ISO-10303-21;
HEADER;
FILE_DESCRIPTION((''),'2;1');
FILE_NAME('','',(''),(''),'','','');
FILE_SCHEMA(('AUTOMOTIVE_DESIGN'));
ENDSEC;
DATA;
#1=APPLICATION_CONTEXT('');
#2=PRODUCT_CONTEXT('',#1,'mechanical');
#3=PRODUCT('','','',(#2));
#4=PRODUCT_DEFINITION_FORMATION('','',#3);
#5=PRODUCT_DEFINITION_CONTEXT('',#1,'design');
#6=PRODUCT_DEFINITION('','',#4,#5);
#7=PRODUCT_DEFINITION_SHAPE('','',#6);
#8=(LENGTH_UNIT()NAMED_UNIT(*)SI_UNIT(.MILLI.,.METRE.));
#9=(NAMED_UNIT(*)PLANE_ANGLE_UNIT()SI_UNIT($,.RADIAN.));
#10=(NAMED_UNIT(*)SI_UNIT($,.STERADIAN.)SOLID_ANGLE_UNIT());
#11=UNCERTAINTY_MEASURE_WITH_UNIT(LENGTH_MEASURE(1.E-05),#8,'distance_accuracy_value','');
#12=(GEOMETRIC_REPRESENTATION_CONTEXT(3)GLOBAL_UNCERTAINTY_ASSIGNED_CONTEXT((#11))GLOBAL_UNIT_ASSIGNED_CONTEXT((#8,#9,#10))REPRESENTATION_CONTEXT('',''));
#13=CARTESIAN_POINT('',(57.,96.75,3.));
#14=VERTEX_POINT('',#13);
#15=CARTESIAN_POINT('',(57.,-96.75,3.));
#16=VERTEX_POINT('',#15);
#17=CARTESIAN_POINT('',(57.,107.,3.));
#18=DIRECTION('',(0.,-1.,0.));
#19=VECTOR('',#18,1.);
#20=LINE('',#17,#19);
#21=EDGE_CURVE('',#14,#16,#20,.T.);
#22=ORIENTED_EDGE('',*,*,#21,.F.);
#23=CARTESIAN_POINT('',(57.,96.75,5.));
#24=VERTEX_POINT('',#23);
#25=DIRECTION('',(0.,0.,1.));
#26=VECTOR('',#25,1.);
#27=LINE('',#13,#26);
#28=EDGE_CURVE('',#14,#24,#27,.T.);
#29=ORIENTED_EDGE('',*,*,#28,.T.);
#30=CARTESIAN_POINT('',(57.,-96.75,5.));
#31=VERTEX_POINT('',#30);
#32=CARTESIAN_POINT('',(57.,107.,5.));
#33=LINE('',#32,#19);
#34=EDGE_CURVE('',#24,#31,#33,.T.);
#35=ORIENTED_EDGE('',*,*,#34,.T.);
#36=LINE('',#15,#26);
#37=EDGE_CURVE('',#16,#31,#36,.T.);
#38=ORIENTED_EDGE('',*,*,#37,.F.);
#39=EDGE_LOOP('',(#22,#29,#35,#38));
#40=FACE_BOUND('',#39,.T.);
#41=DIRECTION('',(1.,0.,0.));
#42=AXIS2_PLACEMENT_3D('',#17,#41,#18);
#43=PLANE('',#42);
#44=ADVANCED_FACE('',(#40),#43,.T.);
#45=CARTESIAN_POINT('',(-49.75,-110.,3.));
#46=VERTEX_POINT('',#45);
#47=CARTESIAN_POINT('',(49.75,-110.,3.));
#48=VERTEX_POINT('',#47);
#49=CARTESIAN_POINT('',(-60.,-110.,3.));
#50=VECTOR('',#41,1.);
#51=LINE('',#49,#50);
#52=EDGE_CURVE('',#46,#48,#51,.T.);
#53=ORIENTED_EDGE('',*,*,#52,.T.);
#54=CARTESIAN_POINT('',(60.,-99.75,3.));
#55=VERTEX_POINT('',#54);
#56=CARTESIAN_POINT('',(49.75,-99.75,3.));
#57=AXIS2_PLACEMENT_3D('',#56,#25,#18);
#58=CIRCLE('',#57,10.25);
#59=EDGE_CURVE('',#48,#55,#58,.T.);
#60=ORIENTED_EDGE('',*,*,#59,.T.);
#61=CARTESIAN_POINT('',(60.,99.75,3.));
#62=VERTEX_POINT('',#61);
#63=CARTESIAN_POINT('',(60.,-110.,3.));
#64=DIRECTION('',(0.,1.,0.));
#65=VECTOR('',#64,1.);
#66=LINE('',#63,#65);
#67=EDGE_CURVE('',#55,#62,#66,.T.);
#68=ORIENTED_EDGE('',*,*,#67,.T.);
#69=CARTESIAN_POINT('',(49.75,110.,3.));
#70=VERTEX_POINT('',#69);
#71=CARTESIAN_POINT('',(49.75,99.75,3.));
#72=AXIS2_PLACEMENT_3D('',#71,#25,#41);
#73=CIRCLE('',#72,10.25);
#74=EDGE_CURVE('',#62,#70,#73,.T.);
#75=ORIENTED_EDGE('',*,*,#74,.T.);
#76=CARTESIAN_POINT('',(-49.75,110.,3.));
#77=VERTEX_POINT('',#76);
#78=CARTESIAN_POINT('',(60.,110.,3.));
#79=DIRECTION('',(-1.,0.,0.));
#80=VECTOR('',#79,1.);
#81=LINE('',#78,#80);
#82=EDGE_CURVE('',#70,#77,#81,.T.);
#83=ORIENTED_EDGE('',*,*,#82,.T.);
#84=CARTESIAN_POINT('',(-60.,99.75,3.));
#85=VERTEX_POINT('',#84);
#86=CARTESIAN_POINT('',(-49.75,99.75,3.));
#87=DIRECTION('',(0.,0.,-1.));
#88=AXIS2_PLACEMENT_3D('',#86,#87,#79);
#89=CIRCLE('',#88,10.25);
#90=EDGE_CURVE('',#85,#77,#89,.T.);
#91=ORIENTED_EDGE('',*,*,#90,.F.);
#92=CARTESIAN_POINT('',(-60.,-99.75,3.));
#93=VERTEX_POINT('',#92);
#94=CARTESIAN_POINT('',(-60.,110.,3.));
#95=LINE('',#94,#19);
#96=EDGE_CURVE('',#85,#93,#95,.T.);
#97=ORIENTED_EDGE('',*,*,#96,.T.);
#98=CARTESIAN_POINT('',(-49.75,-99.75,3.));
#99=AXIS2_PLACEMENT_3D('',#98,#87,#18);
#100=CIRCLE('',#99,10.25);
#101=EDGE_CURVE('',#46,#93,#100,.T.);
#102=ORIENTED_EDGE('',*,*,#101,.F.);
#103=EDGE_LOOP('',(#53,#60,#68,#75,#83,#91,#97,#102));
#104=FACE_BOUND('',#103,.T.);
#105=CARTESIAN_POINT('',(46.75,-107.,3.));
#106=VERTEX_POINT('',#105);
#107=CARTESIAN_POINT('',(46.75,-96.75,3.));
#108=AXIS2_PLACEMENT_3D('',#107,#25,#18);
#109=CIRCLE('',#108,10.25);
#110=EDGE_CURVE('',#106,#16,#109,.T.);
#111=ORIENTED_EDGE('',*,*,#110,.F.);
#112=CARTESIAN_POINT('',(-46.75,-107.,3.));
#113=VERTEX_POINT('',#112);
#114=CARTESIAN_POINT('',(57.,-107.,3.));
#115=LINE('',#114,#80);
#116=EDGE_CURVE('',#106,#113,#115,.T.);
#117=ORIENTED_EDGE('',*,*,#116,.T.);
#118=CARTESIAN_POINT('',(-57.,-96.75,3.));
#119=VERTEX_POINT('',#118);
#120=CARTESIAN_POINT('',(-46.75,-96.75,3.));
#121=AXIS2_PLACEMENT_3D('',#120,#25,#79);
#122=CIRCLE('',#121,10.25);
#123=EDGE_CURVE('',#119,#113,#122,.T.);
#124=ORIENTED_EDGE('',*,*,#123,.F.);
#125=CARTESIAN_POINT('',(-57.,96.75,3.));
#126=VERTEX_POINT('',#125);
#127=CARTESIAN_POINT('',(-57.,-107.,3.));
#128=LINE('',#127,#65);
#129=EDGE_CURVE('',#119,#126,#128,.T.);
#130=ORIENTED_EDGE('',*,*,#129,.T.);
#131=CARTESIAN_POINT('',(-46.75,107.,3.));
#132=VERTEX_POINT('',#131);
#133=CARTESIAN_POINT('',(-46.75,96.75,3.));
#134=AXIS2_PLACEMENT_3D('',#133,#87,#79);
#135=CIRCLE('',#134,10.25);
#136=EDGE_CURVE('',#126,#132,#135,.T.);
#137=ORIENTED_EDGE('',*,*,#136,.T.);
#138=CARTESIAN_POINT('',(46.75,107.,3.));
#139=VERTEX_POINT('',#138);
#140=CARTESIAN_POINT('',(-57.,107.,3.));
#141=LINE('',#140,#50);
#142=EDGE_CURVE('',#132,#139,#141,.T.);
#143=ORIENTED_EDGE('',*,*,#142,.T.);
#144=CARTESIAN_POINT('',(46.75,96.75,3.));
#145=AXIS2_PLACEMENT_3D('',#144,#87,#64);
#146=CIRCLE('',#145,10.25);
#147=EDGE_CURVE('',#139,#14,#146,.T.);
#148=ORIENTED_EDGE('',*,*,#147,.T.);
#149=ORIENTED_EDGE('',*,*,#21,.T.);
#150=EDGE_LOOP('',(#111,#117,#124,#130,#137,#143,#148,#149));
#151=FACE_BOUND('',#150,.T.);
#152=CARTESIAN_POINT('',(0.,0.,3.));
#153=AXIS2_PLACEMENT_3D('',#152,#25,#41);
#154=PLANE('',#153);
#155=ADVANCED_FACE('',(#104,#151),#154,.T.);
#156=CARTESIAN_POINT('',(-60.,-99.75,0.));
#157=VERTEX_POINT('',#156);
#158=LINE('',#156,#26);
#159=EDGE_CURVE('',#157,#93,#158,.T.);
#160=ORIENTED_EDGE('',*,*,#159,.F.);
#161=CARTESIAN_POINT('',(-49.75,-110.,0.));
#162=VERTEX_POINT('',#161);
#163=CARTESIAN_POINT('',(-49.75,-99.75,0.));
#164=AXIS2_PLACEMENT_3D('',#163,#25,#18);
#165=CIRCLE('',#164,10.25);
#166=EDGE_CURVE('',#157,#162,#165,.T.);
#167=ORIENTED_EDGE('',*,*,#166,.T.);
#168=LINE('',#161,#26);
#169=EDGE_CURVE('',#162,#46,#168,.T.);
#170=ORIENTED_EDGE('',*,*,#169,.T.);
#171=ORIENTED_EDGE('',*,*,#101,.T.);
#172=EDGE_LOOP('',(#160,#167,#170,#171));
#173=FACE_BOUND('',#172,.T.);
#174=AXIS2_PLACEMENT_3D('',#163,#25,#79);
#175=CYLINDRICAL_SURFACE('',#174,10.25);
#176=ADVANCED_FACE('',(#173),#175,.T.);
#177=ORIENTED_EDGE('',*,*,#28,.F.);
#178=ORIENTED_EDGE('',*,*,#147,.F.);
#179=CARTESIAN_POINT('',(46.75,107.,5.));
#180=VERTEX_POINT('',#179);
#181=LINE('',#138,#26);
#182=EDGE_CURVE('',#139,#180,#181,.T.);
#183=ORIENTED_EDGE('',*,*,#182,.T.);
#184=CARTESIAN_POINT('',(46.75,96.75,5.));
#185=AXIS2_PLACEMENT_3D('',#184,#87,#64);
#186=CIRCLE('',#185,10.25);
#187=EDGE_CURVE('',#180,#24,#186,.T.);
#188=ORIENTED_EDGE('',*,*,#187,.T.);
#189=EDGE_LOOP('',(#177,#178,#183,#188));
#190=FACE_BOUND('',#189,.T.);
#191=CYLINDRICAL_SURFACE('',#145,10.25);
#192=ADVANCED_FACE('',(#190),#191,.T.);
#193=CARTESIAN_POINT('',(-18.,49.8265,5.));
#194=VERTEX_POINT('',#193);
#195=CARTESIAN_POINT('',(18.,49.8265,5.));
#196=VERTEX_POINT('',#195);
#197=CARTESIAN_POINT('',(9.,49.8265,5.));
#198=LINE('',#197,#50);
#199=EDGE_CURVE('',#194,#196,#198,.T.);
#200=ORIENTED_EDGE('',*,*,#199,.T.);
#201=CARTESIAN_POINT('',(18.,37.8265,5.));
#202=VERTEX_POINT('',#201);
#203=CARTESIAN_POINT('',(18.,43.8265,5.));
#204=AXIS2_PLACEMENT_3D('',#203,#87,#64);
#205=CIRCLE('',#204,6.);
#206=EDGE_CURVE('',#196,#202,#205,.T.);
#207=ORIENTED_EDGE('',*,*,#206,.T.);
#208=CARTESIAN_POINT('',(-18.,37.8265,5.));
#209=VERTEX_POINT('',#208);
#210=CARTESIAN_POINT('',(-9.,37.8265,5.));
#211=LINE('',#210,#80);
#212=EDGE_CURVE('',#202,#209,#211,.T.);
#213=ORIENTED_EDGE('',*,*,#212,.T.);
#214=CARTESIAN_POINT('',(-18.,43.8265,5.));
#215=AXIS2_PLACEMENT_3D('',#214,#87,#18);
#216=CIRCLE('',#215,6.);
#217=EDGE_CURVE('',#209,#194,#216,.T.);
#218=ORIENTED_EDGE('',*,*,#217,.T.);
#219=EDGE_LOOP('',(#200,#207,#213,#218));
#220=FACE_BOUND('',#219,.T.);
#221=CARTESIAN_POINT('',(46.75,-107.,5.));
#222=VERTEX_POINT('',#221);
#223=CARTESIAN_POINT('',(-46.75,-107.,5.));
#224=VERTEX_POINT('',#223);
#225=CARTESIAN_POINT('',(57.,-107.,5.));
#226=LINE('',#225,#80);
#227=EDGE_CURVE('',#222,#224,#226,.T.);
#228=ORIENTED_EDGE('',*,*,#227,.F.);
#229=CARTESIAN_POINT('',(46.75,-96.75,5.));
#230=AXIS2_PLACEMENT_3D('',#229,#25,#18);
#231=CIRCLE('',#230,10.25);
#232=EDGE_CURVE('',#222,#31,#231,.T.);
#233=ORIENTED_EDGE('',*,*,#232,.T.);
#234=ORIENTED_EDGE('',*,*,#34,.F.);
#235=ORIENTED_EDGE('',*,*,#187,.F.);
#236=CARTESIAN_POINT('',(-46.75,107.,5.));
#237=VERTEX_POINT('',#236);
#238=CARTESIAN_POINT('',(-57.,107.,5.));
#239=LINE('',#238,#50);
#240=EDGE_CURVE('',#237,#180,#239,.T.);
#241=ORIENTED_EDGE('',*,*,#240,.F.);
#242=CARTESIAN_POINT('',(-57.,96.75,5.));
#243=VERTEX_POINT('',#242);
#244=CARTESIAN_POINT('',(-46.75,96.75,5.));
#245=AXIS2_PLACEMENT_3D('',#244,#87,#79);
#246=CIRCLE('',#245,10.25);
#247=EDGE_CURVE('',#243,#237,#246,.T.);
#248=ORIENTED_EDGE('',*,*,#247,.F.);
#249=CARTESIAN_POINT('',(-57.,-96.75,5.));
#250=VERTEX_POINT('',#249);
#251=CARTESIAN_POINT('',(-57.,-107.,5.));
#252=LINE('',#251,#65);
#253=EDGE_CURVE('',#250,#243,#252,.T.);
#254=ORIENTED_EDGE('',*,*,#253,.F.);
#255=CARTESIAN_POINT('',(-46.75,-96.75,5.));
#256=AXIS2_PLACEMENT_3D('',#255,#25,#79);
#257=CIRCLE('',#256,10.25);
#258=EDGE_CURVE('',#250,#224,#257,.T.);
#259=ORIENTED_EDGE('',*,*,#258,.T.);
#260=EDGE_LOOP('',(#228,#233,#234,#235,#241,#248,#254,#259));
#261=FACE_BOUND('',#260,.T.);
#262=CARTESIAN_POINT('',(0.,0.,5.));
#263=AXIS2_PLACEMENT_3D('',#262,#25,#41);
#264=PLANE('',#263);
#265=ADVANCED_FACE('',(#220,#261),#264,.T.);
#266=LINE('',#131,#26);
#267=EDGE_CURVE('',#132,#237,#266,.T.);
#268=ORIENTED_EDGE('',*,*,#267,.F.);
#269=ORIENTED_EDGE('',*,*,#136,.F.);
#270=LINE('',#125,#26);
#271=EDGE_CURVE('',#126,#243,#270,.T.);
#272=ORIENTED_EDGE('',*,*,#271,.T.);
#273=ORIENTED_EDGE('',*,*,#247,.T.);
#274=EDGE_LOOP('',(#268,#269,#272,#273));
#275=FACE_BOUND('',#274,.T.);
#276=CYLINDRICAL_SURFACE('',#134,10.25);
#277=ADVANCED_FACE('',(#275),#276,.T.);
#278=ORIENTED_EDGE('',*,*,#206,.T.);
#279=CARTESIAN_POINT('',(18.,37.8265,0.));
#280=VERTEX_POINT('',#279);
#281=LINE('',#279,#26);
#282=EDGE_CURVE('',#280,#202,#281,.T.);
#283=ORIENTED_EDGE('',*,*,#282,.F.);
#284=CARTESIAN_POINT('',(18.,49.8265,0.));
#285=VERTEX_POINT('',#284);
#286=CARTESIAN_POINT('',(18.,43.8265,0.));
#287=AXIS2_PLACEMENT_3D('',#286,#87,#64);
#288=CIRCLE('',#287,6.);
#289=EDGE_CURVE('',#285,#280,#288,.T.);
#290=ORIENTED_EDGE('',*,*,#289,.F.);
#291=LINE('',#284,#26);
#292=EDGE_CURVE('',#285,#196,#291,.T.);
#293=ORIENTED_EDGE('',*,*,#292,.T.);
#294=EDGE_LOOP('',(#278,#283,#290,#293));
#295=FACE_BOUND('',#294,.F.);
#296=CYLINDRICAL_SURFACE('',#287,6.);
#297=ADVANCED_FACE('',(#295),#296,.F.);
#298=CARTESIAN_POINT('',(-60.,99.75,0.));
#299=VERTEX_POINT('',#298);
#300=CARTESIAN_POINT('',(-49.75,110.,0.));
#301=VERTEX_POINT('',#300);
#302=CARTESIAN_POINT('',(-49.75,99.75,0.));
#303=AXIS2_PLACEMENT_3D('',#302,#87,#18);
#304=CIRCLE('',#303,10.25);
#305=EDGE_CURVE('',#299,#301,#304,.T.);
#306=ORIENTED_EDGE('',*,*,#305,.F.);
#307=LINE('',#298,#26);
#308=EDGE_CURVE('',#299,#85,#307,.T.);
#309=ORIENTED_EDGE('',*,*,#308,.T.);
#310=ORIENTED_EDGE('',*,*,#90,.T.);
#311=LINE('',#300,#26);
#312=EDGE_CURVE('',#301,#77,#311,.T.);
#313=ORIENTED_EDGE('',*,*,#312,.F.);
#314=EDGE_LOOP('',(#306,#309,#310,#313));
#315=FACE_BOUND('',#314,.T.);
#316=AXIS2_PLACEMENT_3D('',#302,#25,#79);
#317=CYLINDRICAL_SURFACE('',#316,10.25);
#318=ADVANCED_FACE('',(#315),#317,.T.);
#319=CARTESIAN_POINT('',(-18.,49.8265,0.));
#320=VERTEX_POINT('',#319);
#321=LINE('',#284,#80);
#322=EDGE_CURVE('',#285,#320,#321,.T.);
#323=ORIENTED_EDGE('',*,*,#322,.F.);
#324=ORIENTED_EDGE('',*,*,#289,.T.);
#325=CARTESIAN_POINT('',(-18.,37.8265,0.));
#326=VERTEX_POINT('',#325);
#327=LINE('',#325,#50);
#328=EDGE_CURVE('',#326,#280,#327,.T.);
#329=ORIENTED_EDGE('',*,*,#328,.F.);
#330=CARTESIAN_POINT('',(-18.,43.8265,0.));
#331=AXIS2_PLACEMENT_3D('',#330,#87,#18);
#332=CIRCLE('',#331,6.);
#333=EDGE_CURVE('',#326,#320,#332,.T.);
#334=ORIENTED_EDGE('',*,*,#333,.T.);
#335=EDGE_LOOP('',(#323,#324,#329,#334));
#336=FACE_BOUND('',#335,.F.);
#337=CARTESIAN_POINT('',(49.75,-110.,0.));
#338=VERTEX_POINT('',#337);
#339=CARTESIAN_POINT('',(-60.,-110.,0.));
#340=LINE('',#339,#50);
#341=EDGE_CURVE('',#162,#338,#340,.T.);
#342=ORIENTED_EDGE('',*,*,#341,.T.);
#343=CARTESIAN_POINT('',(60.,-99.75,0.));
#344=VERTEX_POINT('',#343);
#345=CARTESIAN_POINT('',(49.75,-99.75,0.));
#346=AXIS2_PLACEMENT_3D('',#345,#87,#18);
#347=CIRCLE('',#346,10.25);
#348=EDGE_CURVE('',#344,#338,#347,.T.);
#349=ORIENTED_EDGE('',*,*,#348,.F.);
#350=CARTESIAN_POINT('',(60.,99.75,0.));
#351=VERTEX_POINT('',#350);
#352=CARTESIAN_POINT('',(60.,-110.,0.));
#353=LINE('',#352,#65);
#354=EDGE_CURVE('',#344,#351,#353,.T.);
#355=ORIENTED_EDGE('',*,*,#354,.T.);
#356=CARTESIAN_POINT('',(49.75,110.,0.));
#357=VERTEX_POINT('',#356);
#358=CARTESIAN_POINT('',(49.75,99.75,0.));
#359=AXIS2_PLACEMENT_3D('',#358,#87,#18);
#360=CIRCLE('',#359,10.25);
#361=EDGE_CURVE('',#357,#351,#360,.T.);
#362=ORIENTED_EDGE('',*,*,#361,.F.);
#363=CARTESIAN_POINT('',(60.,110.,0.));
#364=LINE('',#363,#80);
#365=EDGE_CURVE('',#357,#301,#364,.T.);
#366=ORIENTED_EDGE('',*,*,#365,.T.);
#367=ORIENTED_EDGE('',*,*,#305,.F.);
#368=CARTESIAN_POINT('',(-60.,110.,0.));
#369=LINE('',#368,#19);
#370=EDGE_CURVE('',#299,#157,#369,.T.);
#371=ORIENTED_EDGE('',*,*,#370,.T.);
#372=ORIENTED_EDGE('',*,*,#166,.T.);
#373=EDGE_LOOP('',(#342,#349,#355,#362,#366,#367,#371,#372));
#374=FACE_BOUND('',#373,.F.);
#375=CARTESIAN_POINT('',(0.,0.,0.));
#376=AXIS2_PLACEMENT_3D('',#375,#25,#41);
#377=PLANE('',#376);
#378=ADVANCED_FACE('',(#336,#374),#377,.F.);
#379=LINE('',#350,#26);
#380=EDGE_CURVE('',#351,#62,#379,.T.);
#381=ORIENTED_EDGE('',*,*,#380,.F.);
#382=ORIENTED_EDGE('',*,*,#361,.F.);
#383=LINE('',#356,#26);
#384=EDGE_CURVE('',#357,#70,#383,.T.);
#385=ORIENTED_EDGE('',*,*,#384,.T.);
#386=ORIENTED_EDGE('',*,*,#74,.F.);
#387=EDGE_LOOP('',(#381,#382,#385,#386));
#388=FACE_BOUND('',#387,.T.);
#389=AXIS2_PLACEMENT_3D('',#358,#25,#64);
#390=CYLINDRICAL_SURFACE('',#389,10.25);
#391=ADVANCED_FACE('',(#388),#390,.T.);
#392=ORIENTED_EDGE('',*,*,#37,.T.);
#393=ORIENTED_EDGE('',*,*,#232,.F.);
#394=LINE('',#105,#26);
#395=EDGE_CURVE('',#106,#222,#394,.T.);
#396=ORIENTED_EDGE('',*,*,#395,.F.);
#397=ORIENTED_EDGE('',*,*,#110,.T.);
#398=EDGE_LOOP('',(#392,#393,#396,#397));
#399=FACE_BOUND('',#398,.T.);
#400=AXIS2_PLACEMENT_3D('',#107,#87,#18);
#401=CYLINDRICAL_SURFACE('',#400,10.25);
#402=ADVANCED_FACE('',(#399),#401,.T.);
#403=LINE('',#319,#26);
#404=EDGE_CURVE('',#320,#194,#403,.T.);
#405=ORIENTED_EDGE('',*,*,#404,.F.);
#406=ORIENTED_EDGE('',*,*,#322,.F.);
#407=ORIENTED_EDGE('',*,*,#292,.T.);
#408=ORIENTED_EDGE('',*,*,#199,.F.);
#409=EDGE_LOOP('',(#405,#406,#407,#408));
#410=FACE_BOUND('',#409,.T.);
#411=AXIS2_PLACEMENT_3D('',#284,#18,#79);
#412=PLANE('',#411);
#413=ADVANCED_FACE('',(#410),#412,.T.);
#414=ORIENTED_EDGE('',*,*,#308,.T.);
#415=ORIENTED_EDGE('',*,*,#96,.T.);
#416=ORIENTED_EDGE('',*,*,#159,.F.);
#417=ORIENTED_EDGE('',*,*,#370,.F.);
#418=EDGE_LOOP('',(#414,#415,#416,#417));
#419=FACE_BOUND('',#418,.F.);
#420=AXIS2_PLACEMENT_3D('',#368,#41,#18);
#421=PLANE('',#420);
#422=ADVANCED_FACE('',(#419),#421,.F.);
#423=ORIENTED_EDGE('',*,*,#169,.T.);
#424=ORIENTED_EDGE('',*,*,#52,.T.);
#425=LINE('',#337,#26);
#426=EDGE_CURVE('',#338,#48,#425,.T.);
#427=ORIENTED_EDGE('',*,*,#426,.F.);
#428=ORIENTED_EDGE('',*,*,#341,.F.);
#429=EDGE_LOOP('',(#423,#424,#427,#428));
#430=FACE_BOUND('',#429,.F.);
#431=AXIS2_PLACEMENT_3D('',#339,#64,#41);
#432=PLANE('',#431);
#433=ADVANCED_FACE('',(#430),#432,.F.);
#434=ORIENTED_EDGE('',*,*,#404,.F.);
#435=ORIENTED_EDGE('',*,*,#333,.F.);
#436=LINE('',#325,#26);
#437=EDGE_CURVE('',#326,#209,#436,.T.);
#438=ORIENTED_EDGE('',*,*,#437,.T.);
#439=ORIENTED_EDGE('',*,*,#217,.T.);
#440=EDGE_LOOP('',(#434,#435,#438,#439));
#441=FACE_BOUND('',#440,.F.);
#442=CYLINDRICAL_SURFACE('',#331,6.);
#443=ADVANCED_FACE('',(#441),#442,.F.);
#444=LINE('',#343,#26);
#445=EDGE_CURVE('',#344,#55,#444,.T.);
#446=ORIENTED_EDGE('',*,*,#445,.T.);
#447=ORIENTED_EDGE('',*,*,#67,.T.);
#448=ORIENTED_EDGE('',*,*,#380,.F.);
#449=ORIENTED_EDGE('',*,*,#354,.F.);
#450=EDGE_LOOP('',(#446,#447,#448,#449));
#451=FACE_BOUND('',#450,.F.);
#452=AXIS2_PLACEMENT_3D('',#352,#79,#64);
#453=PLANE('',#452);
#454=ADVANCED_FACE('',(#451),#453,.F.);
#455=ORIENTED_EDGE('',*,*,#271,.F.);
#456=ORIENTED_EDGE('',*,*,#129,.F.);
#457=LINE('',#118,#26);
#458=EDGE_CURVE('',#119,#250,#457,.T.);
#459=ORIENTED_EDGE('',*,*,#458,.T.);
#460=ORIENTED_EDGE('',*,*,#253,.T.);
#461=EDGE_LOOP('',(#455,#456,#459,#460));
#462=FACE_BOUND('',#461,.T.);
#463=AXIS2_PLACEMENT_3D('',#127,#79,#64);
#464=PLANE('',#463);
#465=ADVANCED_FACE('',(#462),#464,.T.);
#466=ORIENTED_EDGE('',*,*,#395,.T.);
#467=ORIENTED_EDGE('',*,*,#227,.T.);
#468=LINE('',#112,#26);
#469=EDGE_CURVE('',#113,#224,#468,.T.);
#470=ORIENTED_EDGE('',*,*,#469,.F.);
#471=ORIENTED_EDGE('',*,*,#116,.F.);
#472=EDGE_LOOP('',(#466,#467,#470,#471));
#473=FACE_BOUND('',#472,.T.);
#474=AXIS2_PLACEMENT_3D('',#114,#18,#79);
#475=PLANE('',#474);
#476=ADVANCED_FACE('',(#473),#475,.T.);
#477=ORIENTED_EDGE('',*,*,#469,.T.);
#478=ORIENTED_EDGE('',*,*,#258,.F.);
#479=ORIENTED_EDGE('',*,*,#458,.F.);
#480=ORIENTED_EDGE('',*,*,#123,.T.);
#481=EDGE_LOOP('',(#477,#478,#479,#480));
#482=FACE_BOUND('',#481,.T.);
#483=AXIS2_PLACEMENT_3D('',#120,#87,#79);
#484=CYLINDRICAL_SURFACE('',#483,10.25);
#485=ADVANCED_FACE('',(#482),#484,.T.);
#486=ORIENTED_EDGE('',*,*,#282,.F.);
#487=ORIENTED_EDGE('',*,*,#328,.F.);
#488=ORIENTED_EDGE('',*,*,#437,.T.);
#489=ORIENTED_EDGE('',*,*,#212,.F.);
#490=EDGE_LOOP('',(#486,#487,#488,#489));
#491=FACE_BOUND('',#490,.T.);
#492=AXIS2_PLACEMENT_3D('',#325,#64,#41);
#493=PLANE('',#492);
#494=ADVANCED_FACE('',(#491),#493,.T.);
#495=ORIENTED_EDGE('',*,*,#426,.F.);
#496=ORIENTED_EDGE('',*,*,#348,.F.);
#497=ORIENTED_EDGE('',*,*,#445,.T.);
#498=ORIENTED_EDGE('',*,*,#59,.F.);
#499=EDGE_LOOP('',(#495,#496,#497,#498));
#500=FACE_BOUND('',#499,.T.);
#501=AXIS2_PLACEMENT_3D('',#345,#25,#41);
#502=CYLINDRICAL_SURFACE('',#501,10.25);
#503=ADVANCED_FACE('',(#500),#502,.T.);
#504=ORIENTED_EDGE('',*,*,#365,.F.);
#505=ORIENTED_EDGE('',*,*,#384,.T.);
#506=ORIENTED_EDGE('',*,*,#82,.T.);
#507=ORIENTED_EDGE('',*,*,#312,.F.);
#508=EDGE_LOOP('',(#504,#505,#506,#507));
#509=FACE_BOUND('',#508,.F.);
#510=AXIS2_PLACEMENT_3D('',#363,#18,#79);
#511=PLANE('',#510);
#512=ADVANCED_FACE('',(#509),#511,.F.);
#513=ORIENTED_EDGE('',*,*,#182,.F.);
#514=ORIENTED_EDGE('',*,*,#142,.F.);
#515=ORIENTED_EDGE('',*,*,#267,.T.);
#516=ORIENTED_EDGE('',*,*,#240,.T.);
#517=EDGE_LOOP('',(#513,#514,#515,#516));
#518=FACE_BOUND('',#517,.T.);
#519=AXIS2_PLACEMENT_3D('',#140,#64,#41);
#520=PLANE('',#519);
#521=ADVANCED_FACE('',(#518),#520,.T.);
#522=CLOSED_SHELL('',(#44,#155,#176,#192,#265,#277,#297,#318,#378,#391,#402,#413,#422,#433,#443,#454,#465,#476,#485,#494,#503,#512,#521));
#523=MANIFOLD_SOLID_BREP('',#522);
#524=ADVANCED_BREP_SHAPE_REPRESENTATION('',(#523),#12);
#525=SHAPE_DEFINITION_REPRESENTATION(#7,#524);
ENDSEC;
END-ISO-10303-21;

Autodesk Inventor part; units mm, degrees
ref_plane "YZ Plane" through (0, 0, 0) normal (1, 0, 0) x (0, 1, 0)
ref_plane "XZ Plane" through (0, 0, 0) normal (0, 1, 0) x (-1, 0, 0)
ref_plane "XY Plane" through (0, 0, 0) normal (0, 0, 1) x (1, 0, 0)
sketch "Sketch1" plane through (0, 0, 0) normal (0, 0, 1) x (1, 0, 0)
  line L0 (0, 0) -> (64.8574, 0) construction
  line L1 (-60, -110) -> (60, -110)
  line L2 (60, -110) -> (60, 110)
  line L3 (60, 110) -> (-60, 110)
  line L4 (-60, 110) -> (-60, -110)
  line L5 (-60, -110) -> (60, 110) construction
  line L6 (60, -110) -> (-60, 110) construction
  dimension "d0" = 120
  dimension "d1" = 220
extrude "Extrusion1" add sketch "Sketch1" along normal blind 3
fillet "Fillet1" radius 10.25 4 edges at (60, 110, 1.5) (-60, 110, 1.5) (60, -110, 1.5) (-60, -110, 1.5)
sketch "Sketch2" plane through (0, 0, 3) normal (0, 0, 1) x (1, 0, 0)
  line L0 (0, 0) -> (47.0336, 0) construction
  line L1 (-30, -55) -> (30, -55)
  line L2 (30, -55) -> (30, 55)
  line L3 (30, 55) -> (-30, 55)
  line L4 (-30, 55) -> (-30, -55)
  line L5 (-30, -55) -> (30, 55) construction
  line L6 (30, -55) -> (-30, 55) construction
  line L7 (-57, 107) -> (57, 107)
  line L8 (57, 107) -> (57, -107)
  line L9 (57, -107) -> (-57, -107)
  line L10 (-57, -107) -> (-57, 107)
  dimension "d5" = 60
  dimension "d6" = 110
  dimension "d7" = -52
extrude "Extrusion2" add sketch "Sketch2" along normal blind 2 contours L4 L3 L2 L1 | L7 L8 L9 L10
fillet "Fillet2" radius 10.25 4 edges at (57, 107, 4) (-57, 107, 4) (-57, -107, 4) (57, -107, 4)
sketch "Sketch3" plane through (0, 0, 0) normal (0, 0, -1) x (-1, 0, 0)
  line L0 (18, 43.8265) -> (-18, 43.8265) construction
  line L1 (18, 46.8265) -> (-18, 46.8265)
  line L2 (-18, 40.8265) -> (18, 40.8265)
  arc A0 (18, 40.8265) -> (18, 46.8265) centre (18, 43.8265) ccw
  arc A1 (-18, 46.8265) -> (-18, 40.8265) centre (-18, 43.8265) ccw
  line L3 (-18, 49.8265) -> (18, 49.8265)
  arc A2 (18, 37.8265) -> (18, 49.8265) centre (18, 43.8265) ccw
  line L4 (18, 37.8265) -> (-18, 37.8265)
  arc A3 (-18, 49.8265) -> (-18, 37.8265) centre (-18, 43.8265) ccw
  point P0 (0, 0)
  point P1 (0, 43.8265)
  dimension "d11" = 18
  dimension "d12" = 6
  dimension "d15" = 3
extrude "Extrusion3" cut sketch "Sketch3" against normal through all contours A0 L2 A1 L1 | L3 A2 L4 A3
sketch "Sketch4" plane through (0, 0, 4) normal (0, 0, -1) x (-1, 0, 0)
  point P0 (0, 0)
properties part number "BackPlate"
